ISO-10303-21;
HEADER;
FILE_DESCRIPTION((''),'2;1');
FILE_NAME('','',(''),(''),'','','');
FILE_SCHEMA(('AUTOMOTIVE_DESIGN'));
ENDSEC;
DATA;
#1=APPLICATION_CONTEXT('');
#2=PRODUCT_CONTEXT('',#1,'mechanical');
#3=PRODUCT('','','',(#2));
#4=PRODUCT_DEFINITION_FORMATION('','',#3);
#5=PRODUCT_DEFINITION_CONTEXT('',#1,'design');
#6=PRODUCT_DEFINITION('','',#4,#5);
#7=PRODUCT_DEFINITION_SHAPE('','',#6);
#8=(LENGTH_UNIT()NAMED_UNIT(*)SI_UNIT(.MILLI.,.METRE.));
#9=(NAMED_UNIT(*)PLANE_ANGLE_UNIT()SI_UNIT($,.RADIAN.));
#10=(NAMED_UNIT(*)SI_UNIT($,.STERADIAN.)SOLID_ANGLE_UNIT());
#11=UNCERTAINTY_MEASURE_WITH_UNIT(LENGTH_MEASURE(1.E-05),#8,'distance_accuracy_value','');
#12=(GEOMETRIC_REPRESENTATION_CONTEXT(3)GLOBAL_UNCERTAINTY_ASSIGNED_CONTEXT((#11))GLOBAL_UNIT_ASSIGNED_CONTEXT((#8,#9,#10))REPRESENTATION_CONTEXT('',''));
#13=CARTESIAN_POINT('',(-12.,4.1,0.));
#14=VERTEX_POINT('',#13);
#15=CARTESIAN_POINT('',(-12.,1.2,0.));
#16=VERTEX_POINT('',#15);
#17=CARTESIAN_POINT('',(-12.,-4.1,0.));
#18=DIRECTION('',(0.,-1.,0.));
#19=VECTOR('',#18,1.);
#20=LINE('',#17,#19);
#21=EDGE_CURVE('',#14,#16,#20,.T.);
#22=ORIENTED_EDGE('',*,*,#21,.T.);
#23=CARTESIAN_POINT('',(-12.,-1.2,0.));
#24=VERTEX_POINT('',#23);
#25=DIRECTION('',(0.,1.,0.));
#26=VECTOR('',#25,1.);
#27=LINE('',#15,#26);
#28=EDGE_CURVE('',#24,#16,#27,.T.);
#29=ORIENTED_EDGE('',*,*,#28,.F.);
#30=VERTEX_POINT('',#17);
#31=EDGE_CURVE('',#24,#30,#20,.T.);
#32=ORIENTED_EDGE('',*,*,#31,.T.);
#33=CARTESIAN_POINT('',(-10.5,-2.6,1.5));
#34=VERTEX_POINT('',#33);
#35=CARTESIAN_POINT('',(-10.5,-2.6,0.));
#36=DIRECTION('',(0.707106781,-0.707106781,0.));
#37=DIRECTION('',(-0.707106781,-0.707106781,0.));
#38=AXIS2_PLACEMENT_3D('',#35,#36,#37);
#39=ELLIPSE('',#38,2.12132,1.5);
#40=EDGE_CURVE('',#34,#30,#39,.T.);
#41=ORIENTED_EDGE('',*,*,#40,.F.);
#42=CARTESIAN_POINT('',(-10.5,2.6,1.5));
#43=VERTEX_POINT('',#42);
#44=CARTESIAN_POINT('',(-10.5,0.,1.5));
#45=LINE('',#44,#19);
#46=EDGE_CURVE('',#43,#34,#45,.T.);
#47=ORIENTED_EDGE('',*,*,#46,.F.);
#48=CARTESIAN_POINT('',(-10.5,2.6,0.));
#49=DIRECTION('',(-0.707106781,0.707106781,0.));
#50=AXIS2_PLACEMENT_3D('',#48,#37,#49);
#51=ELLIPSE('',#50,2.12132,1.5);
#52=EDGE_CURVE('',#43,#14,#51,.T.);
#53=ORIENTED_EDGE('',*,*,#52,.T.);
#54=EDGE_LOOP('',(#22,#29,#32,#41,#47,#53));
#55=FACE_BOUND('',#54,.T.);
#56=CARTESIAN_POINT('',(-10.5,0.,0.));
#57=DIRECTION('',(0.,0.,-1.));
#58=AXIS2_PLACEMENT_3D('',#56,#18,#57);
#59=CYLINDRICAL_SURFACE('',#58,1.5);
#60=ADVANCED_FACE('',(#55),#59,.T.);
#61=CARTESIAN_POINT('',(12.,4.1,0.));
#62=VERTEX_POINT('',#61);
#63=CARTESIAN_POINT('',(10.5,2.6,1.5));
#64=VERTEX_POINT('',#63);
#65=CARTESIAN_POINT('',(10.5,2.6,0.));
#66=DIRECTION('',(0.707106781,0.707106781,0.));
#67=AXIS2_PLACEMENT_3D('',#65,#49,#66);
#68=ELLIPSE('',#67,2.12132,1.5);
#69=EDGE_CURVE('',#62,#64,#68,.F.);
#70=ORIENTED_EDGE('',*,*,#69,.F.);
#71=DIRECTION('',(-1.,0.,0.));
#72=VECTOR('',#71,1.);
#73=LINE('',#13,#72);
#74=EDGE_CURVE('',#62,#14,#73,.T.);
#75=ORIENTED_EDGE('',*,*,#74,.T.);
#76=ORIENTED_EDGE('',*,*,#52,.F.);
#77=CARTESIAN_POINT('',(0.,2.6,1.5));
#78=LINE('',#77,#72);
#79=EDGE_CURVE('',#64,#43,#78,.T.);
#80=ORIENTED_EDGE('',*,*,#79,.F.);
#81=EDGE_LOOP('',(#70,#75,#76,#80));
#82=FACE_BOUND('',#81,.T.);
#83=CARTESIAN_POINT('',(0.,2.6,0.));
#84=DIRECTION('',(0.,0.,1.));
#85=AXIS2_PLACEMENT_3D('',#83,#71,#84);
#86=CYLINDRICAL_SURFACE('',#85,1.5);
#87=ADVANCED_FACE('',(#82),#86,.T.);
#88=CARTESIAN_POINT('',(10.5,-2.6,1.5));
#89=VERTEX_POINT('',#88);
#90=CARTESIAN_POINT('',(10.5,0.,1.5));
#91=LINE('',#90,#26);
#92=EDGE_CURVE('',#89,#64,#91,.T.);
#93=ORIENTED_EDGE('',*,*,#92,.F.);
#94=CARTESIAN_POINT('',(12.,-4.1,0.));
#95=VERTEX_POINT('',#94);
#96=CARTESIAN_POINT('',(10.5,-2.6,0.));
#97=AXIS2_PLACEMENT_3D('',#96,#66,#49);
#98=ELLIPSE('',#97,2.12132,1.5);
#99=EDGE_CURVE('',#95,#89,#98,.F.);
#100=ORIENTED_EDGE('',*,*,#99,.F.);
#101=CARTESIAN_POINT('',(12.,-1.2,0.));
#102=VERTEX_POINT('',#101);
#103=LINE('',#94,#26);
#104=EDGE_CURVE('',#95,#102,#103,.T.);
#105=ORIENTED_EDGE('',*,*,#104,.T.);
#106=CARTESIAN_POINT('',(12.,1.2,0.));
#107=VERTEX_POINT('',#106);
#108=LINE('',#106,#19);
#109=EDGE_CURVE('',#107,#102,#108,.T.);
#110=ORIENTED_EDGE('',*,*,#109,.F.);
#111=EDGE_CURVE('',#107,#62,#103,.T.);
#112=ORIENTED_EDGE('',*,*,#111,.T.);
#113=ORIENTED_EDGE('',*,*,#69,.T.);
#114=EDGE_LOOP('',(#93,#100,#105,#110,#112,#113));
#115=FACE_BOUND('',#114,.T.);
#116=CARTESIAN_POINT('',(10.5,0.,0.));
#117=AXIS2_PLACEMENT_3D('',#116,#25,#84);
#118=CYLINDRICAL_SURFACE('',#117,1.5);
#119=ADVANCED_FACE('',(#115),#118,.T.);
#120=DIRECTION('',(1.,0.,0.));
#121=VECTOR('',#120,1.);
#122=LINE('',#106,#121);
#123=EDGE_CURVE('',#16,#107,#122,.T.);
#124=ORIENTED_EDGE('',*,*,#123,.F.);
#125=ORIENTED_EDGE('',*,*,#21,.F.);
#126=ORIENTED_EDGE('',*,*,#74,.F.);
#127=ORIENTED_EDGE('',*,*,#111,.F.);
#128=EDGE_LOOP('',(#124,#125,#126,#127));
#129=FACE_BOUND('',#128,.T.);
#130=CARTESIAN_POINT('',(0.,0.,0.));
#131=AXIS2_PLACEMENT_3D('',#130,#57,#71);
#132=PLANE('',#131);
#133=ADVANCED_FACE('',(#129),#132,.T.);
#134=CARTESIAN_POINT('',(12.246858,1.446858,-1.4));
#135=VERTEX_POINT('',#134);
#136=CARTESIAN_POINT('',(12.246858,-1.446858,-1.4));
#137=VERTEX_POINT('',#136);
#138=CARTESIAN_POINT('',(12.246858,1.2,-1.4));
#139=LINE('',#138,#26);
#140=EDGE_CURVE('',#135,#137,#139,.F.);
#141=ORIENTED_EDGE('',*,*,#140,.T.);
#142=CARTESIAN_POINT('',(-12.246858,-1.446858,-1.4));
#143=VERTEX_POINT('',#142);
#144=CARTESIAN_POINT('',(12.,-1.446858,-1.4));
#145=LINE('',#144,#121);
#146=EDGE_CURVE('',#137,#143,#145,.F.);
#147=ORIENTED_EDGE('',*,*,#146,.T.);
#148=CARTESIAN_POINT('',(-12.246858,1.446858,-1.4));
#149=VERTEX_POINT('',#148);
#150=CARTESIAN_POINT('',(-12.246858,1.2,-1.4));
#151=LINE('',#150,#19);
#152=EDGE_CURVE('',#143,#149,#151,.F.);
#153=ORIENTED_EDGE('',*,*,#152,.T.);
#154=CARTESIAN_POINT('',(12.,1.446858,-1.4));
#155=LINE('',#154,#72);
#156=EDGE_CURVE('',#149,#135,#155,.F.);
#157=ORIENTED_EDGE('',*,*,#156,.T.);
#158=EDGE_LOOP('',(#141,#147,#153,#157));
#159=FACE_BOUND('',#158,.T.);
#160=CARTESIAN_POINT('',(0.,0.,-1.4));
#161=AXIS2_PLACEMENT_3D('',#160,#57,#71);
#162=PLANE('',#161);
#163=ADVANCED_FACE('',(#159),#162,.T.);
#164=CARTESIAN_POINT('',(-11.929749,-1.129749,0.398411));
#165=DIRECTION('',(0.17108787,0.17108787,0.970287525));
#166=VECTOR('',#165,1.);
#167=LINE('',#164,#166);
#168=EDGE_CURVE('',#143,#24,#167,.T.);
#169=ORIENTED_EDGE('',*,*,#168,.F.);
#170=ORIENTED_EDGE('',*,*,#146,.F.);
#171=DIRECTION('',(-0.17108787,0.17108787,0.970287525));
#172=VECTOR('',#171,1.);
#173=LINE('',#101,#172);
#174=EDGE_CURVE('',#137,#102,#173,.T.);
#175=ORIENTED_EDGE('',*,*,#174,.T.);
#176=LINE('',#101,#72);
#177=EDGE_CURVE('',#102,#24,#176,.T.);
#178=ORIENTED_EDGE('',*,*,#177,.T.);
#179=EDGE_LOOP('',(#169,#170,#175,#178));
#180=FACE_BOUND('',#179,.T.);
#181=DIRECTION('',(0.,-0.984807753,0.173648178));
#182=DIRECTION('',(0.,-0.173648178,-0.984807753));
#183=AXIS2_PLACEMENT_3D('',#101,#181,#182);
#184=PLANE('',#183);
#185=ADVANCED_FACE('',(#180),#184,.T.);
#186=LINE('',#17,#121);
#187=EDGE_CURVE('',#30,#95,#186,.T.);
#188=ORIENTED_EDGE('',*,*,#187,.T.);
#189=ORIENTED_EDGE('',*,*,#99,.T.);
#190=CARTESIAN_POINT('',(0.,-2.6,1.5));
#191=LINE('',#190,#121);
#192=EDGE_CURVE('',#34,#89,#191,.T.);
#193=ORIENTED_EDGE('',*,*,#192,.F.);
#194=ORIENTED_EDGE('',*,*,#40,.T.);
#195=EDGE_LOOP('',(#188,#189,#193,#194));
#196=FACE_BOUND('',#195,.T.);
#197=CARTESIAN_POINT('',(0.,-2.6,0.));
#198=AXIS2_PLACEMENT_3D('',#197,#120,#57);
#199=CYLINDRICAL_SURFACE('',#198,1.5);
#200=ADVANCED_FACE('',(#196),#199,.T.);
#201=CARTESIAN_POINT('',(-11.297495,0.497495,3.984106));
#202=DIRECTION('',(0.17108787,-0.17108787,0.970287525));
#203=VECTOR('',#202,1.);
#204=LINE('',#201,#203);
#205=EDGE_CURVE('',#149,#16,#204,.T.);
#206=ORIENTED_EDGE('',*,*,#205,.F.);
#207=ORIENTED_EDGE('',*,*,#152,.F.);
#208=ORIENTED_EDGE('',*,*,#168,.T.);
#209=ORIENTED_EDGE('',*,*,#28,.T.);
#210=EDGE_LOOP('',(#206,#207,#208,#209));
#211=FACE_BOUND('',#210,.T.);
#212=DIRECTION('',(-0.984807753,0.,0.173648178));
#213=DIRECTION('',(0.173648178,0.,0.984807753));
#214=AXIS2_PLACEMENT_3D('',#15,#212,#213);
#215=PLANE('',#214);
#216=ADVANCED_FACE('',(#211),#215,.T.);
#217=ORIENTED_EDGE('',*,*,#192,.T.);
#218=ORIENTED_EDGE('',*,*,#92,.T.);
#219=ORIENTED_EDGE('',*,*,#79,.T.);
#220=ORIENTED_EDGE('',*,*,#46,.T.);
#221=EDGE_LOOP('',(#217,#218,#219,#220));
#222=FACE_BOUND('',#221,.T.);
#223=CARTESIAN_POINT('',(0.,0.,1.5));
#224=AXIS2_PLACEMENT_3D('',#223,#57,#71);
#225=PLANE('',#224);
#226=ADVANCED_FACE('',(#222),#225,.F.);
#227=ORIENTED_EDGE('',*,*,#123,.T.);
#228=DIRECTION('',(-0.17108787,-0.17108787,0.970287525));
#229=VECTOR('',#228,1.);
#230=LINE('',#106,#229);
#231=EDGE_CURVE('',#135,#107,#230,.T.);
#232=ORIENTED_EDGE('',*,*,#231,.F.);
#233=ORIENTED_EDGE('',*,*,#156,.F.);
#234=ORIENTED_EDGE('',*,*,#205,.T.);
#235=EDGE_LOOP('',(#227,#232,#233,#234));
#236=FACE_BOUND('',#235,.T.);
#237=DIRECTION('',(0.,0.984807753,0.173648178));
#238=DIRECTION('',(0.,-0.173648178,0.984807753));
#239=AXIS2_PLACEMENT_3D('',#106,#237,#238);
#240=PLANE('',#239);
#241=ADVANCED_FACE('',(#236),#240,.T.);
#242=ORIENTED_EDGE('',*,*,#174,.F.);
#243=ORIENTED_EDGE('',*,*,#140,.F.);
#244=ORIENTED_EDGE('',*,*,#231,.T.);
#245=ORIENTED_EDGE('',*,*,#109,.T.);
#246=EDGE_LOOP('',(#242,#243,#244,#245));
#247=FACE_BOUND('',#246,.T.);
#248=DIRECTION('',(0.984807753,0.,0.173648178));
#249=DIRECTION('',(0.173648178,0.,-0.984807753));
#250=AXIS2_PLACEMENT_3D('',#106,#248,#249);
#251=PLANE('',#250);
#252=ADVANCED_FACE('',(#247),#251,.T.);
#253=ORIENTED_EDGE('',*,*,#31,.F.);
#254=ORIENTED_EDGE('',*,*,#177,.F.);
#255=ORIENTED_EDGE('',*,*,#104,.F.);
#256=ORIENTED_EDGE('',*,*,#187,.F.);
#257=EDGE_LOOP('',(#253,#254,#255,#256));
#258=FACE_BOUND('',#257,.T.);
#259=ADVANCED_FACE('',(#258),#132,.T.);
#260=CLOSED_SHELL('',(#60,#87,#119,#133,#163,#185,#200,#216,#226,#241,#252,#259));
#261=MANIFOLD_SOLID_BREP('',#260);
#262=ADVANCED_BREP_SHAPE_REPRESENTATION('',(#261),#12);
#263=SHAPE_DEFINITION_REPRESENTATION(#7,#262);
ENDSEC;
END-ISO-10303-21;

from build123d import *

# Parameters (mm, degrees)
SKETCH1_W           = 24
SKETCH1_H           = 8.2
BOSS_EXTRUDE1_DEPTH = 1.5
SKETCH2_W           = 24
SKETCH2_H           = 2.4
BOSS_EXTRUDE2_DEPTH = 1.4
BOSS_EXTRUDE2_DRAFT = -10
FILLET1_R           = 1.5


with BuildPart() as part:
    # Sketch1 → Boss-Extrude1 (new body)
    with BuildSketch(Plane.XY):
        Rectangle(SKETCH1_W, SKETCH1_H)
    extrude(amount=BOSS_EXTRUDE1_DEPTH)


with BuildPart() as boss_extrude2_tool:
    # Sketch2 → Boss-Extrude2 (with draft: the straight prism first)
    with BuildSketch(Plane(origin=(0, 0, 0), x_dir=(-1, 0, 0), z_dir=(0, 0, -1))):
        Rectangle(SKETCH2_W, SKETCH2_H)
    extrude(amount=BOSS_EXTRUDE2_DEPTH)
    # Boss-Extrude2: the draft: its side faces are tilted about the plane it starts from
    boss_extrude2_sides = [boss_extrude2_tool.faces().sort_by_distance(p)[0] for p in [
        (12, 0, -0.7),
        (0, -1.2, -0.7),
        (-12, 0, -0.7),
        (0, 1.2, -0.7),
    ]]
    draft(boss_extrude2_sides, Plane(origin=(0, 0, 0), x_dir=(-1, 0, 0), z_dir=(0, 0, -1)), BOSS_EXTRUDE2_DRAFT)


with BuildPart() as part_1:
    add(part.part)

    # Boss-Extrude2: add boss_extrude2_tool
    add(boss_extrude2_tool.part)

    # Fillet1
    fillet1_edges = [part_1.edges().sort_by_distance(p)[0] for p in [
        (0, -4.1, 1.5),
        (-12, 0, 1.5),
        (0, 4.1, 1.5),
        (12, 0, 1.5),
    ]]
    fillet(fillet1_edges, radius=FILLET1_R - 0.0001)  # a hair under: the kernel refuses the full size


solid = part_1.part
